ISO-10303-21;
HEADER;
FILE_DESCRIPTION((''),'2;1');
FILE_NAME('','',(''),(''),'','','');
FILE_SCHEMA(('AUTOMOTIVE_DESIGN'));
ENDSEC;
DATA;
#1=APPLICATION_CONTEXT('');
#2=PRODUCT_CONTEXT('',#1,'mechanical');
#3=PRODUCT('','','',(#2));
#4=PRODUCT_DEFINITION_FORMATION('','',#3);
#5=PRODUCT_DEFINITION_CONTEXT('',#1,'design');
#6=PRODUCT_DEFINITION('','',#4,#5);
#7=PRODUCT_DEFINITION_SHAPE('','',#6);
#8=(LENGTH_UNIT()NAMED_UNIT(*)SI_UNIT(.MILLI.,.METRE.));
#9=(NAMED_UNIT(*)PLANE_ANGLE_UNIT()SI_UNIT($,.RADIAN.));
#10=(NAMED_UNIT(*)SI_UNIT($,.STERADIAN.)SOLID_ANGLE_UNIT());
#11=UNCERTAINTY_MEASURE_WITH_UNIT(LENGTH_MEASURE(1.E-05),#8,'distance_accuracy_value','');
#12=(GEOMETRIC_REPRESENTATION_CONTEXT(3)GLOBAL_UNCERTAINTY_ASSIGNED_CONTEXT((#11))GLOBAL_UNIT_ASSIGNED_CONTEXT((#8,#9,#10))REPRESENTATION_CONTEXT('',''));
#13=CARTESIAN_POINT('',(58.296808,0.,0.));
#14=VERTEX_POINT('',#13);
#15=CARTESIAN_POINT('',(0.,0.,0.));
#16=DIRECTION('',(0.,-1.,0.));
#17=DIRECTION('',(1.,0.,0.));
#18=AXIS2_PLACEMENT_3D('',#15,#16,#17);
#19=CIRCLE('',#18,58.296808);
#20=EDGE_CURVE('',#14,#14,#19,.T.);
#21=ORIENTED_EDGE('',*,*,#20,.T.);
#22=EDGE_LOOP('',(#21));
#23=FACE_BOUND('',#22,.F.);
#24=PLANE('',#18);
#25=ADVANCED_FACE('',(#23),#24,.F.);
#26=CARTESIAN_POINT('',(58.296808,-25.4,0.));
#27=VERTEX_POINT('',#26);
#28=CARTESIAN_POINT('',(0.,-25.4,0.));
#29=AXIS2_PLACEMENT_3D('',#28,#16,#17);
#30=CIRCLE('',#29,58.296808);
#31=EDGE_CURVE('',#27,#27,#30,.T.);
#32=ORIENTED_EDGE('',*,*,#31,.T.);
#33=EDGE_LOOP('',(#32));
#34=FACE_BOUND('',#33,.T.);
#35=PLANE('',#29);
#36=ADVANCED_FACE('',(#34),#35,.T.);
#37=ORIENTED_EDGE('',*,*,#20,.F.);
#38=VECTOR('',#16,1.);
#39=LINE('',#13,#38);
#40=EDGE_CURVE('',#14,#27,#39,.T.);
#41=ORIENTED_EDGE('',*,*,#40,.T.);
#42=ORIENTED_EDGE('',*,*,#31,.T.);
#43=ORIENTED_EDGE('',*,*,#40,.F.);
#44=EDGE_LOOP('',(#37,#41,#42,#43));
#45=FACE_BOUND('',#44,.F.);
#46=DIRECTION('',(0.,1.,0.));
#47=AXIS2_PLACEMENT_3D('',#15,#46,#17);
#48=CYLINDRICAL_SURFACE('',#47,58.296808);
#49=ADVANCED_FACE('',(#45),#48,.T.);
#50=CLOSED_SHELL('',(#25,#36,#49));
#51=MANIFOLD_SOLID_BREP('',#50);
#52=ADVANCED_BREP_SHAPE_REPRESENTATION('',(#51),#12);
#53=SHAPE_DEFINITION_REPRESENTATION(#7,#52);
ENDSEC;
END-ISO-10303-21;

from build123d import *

# Parameters (mm, degrees)
F0_R     = 58.2968081569
F1_DEPTH = 25.4


# Not quite as in the source:
# - the program builds the solid bodies; features that only make, move or delete a surface that nothing else refers to are left out


with BuildPart() as f1:
    # F0 (on Front) → F1 (new body)
    with BuildSketch(Plane.XZ):
        Circle(F0_R)
    extrude(amount=F1_DEPTH)

    # F5: F1 across plane


with BuildPart() as f1_1:
    add(f1.part)
    add(f1.part.mirror(Plane.XY))


solid = f1_1.part
